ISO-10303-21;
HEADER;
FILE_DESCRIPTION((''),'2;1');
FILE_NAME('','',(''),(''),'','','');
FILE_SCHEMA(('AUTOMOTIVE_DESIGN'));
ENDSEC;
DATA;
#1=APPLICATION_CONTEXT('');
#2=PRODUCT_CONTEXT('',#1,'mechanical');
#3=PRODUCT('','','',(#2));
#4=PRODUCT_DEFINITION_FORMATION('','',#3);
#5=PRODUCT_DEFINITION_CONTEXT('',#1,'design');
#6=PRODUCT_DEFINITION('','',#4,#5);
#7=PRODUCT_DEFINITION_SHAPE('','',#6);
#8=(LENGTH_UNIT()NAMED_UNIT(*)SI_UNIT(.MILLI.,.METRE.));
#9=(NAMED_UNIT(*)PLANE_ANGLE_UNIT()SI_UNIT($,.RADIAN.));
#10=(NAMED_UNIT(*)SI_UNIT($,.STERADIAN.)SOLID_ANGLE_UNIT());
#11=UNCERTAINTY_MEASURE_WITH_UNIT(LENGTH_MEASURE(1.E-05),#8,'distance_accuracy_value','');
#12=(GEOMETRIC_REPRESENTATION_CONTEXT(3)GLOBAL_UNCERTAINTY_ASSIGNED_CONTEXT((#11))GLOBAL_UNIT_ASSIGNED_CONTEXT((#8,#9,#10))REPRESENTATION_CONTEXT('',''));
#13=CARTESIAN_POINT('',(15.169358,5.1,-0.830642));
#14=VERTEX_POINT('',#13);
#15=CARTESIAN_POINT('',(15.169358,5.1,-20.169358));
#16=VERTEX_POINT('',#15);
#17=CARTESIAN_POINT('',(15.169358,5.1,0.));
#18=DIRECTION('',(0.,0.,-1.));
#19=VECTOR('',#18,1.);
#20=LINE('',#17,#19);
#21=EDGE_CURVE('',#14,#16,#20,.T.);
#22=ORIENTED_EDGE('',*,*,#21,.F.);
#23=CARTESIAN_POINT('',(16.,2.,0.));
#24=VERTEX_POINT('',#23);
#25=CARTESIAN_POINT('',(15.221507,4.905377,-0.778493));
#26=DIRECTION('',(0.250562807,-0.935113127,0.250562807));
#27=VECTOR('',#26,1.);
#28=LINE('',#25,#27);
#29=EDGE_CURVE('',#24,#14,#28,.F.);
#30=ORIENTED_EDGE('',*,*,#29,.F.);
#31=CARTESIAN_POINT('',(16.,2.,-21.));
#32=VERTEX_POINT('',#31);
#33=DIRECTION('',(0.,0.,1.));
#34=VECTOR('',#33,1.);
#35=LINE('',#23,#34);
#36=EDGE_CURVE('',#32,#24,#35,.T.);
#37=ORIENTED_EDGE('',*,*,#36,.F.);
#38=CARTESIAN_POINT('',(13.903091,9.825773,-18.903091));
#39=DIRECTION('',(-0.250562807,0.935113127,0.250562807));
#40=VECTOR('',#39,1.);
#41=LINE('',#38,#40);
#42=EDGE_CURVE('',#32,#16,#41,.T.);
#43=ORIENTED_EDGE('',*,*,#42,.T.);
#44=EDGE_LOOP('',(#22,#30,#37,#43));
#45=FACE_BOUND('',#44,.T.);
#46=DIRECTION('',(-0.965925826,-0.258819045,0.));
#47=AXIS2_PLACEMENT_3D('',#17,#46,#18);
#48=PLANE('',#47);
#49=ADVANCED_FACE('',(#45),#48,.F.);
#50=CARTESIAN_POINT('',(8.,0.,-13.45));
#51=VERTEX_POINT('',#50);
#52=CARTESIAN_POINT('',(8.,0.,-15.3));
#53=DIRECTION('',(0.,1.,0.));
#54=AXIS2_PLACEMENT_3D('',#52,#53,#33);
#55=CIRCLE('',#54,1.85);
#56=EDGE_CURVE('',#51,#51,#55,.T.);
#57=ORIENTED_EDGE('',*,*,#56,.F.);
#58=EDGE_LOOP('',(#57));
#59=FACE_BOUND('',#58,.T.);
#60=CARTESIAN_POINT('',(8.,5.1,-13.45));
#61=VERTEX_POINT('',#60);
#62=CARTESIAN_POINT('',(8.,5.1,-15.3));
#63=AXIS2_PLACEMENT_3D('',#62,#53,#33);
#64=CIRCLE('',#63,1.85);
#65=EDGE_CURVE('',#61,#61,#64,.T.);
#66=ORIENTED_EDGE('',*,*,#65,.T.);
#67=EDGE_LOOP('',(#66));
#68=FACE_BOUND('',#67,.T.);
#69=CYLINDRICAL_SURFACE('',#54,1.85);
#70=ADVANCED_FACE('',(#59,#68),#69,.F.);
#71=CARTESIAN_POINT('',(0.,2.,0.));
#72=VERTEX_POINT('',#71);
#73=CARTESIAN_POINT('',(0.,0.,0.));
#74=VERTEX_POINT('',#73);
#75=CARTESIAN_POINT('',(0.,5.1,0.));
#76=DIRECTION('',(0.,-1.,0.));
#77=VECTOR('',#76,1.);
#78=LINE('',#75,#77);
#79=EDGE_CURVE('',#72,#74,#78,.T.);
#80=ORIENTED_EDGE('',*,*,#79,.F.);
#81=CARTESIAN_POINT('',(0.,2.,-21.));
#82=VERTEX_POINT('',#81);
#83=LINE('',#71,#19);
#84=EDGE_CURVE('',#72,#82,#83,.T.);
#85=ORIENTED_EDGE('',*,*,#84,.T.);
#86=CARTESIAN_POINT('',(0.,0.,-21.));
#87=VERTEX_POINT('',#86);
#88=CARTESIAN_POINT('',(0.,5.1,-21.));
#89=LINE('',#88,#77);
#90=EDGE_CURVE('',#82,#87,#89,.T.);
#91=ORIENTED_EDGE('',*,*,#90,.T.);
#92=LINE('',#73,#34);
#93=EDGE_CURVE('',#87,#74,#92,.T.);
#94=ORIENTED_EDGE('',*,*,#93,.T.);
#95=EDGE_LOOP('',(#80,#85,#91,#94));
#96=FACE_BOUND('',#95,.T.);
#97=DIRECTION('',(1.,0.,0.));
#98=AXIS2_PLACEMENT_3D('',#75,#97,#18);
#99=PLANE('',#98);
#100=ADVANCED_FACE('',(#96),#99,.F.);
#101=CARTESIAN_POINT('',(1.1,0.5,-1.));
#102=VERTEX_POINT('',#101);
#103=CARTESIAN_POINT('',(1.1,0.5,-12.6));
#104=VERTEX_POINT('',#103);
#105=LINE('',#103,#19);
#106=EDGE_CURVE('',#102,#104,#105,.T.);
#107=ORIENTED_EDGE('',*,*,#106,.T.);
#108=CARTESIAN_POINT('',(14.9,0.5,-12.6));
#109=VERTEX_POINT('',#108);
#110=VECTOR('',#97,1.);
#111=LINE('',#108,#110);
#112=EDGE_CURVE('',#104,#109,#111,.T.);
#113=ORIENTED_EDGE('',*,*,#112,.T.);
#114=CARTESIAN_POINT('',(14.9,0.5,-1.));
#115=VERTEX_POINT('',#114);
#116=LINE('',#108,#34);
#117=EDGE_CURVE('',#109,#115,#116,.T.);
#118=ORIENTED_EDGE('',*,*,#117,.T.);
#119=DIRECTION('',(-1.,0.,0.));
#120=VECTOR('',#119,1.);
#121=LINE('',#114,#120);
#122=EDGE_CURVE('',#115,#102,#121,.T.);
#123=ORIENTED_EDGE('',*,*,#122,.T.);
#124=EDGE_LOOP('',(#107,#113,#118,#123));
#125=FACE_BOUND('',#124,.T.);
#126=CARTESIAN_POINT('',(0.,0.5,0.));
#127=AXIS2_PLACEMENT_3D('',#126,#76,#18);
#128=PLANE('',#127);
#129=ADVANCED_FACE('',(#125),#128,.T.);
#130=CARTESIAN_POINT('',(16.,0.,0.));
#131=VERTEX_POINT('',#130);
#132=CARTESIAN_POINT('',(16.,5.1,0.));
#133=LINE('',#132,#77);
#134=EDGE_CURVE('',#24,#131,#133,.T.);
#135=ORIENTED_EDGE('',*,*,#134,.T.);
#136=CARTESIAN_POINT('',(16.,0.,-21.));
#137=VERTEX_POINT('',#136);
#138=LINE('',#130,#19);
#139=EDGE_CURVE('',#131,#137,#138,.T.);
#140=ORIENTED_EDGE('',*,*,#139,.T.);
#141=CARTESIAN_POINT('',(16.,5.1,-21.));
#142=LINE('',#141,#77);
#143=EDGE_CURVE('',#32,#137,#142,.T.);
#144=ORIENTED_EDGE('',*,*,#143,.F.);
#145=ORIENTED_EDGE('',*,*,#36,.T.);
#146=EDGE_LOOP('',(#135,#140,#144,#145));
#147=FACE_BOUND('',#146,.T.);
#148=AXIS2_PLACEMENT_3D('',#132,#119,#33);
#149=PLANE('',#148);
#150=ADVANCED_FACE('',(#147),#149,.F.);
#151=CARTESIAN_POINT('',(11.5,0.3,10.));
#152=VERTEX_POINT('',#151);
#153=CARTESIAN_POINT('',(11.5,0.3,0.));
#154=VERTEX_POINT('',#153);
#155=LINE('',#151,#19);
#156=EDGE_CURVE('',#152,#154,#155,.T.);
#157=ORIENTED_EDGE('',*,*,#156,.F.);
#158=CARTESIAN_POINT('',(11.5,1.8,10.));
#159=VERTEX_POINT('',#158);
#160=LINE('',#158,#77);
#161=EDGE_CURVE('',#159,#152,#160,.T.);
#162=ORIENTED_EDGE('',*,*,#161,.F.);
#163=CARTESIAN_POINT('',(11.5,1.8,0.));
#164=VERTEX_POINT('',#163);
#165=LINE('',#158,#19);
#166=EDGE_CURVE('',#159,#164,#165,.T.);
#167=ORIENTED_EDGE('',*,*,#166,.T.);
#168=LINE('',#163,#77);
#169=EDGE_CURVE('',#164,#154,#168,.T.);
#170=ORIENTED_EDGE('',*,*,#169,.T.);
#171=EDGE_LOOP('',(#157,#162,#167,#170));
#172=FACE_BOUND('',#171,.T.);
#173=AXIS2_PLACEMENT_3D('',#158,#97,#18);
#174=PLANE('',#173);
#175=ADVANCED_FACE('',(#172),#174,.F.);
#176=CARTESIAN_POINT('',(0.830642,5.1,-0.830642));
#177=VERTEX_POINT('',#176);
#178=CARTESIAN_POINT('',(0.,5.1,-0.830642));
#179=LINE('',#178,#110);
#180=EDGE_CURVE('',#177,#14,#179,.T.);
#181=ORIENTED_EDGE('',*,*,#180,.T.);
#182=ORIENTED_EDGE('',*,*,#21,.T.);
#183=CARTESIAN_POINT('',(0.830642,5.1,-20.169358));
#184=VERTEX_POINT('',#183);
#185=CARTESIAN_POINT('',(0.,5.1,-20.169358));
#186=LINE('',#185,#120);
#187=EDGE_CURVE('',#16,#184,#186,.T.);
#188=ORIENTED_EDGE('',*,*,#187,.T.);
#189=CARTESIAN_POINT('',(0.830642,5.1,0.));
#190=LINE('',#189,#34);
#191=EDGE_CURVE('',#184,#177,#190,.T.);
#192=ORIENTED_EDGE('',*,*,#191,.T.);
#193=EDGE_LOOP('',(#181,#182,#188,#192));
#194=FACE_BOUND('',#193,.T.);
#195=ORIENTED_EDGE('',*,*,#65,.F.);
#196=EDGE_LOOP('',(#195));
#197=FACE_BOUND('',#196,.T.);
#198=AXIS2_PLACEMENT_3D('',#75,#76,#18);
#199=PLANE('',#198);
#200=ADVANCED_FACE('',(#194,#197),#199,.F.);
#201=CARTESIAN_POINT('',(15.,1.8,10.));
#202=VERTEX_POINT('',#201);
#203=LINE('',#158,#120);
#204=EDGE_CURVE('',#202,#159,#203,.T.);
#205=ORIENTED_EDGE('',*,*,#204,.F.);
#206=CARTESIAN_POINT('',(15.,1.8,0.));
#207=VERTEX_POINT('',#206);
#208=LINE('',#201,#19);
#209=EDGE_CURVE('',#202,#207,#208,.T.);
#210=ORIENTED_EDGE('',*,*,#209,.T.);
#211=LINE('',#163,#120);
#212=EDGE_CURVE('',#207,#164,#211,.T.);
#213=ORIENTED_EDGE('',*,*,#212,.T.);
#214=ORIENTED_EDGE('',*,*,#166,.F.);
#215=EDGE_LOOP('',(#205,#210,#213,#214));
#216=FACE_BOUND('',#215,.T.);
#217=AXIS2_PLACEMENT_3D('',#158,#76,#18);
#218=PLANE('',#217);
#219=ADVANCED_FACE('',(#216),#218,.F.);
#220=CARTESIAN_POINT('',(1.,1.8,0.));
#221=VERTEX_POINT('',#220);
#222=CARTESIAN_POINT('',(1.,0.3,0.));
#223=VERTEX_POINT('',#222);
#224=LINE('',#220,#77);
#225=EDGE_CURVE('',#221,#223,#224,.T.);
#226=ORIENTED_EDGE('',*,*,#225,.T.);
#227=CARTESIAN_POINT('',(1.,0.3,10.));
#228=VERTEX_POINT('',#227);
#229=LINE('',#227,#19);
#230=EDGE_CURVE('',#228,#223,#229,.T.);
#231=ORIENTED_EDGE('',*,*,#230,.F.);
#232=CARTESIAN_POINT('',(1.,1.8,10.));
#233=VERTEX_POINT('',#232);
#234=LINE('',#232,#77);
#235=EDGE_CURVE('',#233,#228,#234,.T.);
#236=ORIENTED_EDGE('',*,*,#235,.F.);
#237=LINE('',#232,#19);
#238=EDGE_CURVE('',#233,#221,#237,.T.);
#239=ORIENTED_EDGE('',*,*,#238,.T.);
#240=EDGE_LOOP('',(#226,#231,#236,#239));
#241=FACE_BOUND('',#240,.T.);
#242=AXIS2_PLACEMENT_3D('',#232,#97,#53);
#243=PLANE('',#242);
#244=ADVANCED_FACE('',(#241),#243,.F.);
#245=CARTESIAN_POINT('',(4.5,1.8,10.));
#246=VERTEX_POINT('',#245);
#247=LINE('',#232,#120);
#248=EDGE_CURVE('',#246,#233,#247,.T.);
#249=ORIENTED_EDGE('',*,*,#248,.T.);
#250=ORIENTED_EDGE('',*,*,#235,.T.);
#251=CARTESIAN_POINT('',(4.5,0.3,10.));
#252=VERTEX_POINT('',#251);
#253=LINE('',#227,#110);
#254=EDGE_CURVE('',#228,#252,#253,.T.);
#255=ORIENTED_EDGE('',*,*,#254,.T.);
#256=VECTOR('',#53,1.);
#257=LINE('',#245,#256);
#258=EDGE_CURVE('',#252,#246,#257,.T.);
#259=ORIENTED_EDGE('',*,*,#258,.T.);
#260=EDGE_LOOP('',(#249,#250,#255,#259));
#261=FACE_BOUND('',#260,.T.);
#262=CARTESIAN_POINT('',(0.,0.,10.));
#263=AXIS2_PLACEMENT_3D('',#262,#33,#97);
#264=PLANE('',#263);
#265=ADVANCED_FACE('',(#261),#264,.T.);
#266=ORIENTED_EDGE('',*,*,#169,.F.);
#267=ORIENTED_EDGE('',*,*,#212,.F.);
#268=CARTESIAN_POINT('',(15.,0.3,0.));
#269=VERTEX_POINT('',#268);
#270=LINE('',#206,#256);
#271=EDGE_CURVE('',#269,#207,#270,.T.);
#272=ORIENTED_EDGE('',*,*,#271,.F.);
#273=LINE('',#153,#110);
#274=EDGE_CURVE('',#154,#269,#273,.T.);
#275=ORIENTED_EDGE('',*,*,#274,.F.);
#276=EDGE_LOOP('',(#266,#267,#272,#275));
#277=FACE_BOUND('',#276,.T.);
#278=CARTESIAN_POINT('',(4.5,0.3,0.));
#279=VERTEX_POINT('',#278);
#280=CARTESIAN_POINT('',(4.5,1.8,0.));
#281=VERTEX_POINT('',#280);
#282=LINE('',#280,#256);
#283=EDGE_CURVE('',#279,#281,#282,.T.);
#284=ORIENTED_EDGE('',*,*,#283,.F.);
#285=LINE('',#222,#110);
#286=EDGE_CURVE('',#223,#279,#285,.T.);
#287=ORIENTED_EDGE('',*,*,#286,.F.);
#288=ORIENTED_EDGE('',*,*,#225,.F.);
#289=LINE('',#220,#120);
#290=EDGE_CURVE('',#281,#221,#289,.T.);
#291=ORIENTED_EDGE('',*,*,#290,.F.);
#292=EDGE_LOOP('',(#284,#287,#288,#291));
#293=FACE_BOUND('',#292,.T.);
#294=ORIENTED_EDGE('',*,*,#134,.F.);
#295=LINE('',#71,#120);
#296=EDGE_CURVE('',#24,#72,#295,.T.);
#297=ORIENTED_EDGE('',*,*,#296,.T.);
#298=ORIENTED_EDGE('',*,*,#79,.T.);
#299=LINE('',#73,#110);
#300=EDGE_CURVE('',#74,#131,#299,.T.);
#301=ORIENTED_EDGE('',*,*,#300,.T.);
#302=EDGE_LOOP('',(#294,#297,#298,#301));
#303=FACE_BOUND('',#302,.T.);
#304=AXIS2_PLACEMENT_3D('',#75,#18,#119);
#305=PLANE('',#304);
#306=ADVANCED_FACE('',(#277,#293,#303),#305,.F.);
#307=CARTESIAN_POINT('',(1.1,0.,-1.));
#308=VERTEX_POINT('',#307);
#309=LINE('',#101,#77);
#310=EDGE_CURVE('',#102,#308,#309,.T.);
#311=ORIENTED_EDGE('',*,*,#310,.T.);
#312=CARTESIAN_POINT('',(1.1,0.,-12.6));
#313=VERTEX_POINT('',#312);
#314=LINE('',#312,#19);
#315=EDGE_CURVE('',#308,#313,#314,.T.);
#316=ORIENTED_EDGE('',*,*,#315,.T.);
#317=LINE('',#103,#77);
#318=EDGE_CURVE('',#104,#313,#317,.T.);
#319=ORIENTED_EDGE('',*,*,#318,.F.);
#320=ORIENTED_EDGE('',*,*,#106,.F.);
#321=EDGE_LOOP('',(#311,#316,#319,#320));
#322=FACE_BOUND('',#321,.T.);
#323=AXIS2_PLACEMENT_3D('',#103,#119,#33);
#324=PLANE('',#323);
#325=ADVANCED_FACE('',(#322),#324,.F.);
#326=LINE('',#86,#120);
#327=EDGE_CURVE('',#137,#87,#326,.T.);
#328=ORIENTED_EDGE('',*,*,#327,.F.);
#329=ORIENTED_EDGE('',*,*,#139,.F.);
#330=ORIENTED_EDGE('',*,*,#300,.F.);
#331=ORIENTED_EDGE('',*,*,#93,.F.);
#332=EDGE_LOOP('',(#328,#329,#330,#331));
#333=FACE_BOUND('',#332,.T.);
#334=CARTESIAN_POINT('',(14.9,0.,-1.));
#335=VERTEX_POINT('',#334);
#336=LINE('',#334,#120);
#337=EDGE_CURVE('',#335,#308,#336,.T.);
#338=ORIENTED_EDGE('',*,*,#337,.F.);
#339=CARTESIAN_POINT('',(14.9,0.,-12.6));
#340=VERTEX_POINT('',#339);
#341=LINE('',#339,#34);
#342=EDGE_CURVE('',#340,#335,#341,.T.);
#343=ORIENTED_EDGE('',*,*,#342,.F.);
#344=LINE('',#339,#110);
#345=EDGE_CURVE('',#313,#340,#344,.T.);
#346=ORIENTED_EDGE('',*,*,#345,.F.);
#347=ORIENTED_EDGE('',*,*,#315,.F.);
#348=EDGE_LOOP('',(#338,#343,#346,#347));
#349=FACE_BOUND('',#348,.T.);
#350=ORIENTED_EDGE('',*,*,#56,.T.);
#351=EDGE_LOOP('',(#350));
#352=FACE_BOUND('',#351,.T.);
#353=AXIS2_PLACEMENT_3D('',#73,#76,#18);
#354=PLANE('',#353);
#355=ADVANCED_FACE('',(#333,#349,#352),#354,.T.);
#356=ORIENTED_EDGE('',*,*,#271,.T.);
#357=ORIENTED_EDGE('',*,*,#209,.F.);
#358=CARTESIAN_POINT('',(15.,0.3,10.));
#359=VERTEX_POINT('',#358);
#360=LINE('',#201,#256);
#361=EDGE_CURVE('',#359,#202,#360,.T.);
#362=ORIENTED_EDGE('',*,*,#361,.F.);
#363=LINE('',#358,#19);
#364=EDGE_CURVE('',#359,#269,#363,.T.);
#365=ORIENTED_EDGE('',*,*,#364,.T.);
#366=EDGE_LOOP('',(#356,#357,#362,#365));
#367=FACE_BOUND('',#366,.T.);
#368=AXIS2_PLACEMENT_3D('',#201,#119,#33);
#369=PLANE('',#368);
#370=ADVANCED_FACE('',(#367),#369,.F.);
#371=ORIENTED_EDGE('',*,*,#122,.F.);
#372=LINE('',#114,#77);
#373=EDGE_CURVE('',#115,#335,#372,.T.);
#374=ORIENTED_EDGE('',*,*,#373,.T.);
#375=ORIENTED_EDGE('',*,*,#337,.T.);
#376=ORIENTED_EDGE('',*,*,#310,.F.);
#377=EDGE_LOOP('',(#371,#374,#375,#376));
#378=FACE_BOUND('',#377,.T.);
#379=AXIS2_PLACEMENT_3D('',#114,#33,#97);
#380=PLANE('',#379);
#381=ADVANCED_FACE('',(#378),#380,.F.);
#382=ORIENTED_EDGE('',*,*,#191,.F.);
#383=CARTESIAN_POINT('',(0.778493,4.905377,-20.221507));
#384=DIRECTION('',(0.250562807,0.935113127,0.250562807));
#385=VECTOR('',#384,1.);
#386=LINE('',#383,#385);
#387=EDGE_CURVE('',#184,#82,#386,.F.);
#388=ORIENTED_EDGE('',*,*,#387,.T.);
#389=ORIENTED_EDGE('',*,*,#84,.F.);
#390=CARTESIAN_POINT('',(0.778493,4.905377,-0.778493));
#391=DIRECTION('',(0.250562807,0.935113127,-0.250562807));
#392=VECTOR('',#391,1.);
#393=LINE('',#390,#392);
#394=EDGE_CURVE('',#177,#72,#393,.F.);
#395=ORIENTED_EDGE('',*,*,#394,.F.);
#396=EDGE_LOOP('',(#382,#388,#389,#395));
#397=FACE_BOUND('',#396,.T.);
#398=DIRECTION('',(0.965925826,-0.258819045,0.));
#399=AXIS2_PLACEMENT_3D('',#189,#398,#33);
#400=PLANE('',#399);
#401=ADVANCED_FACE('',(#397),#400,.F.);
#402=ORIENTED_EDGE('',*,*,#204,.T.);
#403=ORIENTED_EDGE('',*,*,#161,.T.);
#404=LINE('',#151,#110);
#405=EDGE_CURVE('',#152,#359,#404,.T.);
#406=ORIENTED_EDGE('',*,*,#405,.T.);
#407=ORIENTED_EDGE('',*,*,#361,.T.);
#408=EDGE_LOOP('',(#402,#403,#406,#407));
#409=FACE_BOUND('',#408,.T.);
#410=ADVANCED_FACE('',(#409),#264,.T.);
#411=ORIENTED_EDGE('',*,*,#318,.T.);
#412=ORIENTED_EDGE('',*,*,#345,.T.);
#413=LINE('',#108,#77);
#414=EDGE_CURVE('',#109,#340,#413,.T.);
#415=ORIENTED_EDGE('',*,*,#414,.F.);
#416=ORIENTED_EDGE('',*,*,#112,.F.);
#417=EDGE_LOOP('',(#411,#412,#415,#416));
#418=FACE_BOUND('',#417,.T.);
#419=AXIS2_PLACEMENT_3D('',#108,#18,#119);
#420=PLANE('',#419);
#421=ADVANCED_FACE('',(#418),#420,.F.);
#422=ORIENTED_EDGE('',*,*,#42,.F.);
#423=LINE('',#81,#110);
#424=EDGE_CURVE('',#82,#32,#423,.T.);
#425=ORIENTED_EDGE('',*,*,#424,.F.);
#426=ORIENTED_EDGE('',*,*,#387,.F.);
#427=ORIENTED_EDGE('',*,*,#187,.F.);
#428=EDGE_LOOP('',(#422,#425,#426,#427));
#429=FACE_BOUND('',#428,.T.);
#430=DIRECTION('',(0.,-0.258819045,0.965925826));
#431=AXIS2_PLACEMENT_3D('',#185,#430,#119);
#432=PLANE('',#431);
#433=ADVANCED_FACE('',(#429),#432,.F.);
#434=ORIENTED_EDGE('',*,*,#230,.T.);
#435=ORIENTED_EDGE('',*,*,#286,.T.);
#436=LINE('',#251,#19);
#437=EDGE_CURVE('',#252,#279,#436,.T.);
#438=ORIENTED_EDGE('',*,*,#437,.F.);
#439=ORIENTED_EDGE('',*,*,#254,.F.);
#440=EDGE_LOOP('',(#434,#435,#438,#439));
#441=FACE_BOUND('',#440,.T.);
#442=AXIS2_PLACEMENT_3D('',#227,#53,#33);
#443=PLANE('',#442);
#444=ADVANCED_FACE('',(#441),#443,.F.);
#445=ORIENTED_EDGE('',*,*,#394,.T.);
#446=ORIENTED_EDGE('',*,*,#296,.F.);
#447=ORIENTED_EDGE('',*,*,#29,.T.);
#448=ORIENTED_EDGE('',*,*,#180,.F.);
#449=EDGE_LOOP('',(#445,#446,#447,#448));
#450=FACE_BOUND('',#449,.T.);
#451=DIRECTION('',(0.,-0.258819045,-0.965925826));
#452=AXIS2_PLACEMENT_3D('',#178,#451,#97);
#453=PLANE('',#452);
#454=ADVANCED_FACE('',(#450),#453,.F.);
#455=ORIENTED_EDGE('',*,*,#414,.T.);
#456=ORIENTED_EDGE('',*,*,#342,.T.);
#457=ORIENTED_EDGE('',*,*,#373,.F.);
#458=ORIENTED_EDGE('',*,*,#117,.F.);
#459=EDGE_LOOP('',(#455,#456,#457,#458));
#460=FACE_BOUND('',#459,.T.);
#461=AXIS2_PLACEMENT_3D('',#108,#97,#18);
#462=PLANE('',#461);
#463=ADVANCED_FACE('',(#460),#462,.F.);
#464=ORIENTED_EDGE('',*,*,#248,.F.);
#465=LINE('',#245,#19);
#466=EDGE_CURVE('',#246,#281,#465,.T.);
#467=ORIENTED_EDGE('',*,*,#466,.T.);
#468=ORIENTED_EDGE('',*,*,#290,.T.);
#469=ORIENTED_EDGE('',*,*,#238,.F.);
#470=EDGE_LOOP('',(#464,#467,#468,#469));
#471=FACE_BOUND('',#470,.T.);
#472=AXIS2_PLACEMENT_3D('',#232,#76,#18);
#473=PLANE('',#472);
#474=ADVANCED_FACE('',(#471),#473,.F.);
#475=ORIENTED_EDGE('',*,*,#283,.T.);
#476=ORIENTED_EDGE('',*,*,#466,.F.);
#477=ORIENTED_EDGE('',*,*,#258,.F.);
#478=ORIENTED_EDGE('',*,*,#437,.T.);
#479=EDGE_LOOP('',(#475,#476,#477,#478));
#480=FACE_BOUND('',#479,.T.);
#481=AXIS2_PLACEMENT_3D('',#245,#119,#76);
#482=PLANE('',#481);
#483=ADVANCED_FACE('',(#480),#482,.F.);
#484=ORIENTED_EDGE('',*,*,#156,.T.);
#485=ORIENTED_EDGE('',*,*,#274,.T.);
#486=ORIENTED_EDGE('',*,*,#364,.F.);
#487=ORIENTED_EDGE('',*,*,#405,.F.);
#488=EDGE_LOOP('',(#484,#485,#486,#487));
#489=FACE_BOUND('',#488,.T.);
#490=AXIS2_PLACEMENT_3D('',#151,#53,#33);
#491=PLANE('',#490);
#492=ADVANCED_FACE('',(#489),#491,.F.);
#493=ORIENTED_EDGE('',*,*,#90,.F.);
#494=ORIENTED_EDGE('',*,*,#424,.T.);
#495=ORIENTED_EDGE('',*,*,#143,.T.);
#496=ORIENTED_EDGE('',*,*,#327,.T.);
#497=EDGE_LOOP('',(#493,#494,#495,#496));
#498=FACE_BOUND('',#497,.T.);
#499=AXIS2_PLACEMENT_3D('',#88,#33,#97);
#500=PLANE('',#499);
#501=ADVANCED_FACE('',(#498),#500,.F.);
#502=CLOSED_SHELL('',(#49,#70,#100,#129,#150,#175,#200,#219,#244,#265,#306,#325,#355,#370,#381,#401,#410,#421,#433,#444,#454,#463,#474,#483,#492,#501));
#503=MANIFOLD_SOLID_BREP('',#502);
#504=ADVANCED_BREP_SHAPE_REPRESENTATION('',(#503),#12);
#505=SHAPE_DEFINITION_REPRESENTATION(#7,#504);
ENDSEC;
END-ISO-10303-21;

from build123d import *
from OCP.BRepFilletAPI import BRepFilletAPI_MakeChamfer

# Parameters (mm, degrees)
SKETCH1_W              = 16
SKETCH1_H              = 21
BOSS_EXTRUDE1_DEPTH    = 5.1
SKETCH2_R              = 1.85
CUT_EXTRUDE1_DEPTH     = 5.1
CHAMFER1_SIZE          = 3.1
CHAMFER1_SIZE2         = 0.830642497
SKETCH3_W              = 3.5
SKETCH3_H              = 1.5
BOSS_EXTRUDE2_DEPTH    = 10
CUT_EXTRUDE3_START     = -0.5
CUT_EXTRUDE3_OUTLINE_W = 13.8
CUT_EXTRUDE3_OUTLINE_H = 11.6
CUT_EXTRUDE3_DEPTH     = 0.5


# Read off the part's stored shape, not the designer's step: Cut-Extrude3
with BuildPart() as part:
    # Sketch1 → Boss-Extrude1 (new body)
    with BuildSketch(Plane(origin=(0, 0, 0), x_dir=(1, 0, 0), z_dir=(0, 1, 0))):
        with Locations((8, 10.5)):
            Rectangle(SKETCH1_W, SKETCH1_H)
    extrude(amount=BOSS_EXTRUDE1_DEPTH)

    # Sketch2 → Cut-Extrude1 (cut)
    with BuildSketch(Plane(origin=(0, 5.1, 0), x_dir=(1, 0, 0), z_dir=(0, 1, 0))):
        with Locations(Location((8, 15.3, 0), (0, 0, 270))):
            Circle(SKETCH2_R)
    extrude(amount=-CUT_EXTRUDE1_DEPTH, mode=Mode.SUBTRACT)

    # Chamfer1: one chamfer whose edges measure the first distance from different faces: ONE call of the kernel's chamfer builder (chamfer() names one face for all edges)
    chamfer1_edges_1 = [part.edges().sort_by_distance(p)[0] for p in [
        (16, 5.1, -10.5),
    ]]
    chamfer1_side_1 = [part.faces().sort_by_distance(p)[0] for p in [
        (16, 2.55, -10.5),
    ]]
    chamfer1_edges_2 = [part.edges().sort_by_distance(p)[0] for p in [
        (8, 5.1, -21),
    ]]
    chamfer1_side_2 = [part.faces().sort_by_distance(p)[0] for p in [
        (8, 2.55, -21),
    ]]
    chamfer1_edges_3 = [part.edges().sort_by_distance(p)[0] for p in [
        (0, 5.1, -10.5),
    ]]
    chamfer1_side_3 = [part.faces().sort_by_distance(p)[0] for p in [
        (0, 2.55, -10.5),
    ]]
    chamfer1_edges_4 = [part.edges().sort_by_distance(p)[0] for p in [
        (8, 5.1, 0),
    ]]
    chamfer1_side_4 = [part.faces().sort_by_distance(p)[0] for p in [
        (8, 2.55, 0),
    ]]
    chamfer1 = BRepFilletAPI_MakeChamfer(part.part.solid().wrapped)
    for e in chamfer1_edges_1:
        chamfer1.Add(CHAMFER1_SIZE, CHAMFER1_SIZE2, e.wrapped, chamfer1_side_1[0].wrapped)  # the first distance lies on this face
    for e in chamfer1_edges_2:
        chamfer1.Add(CHAMFER1_SIZE, CHAMFER1_SIZE2, e.wrapped, chamfer1_side_2[0].wrapped)  # the first distance lies on this face
    for e in chamfer1_edges_3:
        chamfer1.Add(CHAMFER1_SIZE, CHAMFER1_SIZE2, e.wrapped, chamfer1_side_3[0].wrapped)  # the first distance lies on this face
    for e in chamfer1_edges_4:
        chamfer1.Add(CHAMFER1_SIZE, CHAMFER1_SIZE2, e.wrapped, chamfer1_side_4[0].wrapped)  # the first distance lies on this face
    add(Compound.cast(chamfer1.Shape()), mode=Mode.REPLACE)

    # Sketch3 → Boss-Extrude2 (add)
    with BuildSketch(Plane.XY):
        with Locations((2.75, 1.05)):
            Rectangle(SKETCH3_W, SKETCH3_H)
        with Locations((13.25, 1.05)):
            Rectangle(SKETCH3_W, SKETCH3_H)
    extrude(amount=BOSS_EXTRUDE2_DEPTH)

    # Cut-Extrude3 outline → Cut-Extrude3 (cut)
    with BuildSketch(Plane(origin=(0, 0, 0), x_dir=(-1, 0, 0), z_dir=(0, -1, 0)).offset(CUT_EXTRUDE3_START)):
        with Locations((-8, 6.8)):
            Rectangle(CUT_EXTRUDE3_OUTLINE_W, CUT_EXTRUDE3_OUTLINE_H)
    extrude(amount=CUT_EXTRUDE3_DEPTH, mode=Mode.SUBTRACT)


solid = part.part
